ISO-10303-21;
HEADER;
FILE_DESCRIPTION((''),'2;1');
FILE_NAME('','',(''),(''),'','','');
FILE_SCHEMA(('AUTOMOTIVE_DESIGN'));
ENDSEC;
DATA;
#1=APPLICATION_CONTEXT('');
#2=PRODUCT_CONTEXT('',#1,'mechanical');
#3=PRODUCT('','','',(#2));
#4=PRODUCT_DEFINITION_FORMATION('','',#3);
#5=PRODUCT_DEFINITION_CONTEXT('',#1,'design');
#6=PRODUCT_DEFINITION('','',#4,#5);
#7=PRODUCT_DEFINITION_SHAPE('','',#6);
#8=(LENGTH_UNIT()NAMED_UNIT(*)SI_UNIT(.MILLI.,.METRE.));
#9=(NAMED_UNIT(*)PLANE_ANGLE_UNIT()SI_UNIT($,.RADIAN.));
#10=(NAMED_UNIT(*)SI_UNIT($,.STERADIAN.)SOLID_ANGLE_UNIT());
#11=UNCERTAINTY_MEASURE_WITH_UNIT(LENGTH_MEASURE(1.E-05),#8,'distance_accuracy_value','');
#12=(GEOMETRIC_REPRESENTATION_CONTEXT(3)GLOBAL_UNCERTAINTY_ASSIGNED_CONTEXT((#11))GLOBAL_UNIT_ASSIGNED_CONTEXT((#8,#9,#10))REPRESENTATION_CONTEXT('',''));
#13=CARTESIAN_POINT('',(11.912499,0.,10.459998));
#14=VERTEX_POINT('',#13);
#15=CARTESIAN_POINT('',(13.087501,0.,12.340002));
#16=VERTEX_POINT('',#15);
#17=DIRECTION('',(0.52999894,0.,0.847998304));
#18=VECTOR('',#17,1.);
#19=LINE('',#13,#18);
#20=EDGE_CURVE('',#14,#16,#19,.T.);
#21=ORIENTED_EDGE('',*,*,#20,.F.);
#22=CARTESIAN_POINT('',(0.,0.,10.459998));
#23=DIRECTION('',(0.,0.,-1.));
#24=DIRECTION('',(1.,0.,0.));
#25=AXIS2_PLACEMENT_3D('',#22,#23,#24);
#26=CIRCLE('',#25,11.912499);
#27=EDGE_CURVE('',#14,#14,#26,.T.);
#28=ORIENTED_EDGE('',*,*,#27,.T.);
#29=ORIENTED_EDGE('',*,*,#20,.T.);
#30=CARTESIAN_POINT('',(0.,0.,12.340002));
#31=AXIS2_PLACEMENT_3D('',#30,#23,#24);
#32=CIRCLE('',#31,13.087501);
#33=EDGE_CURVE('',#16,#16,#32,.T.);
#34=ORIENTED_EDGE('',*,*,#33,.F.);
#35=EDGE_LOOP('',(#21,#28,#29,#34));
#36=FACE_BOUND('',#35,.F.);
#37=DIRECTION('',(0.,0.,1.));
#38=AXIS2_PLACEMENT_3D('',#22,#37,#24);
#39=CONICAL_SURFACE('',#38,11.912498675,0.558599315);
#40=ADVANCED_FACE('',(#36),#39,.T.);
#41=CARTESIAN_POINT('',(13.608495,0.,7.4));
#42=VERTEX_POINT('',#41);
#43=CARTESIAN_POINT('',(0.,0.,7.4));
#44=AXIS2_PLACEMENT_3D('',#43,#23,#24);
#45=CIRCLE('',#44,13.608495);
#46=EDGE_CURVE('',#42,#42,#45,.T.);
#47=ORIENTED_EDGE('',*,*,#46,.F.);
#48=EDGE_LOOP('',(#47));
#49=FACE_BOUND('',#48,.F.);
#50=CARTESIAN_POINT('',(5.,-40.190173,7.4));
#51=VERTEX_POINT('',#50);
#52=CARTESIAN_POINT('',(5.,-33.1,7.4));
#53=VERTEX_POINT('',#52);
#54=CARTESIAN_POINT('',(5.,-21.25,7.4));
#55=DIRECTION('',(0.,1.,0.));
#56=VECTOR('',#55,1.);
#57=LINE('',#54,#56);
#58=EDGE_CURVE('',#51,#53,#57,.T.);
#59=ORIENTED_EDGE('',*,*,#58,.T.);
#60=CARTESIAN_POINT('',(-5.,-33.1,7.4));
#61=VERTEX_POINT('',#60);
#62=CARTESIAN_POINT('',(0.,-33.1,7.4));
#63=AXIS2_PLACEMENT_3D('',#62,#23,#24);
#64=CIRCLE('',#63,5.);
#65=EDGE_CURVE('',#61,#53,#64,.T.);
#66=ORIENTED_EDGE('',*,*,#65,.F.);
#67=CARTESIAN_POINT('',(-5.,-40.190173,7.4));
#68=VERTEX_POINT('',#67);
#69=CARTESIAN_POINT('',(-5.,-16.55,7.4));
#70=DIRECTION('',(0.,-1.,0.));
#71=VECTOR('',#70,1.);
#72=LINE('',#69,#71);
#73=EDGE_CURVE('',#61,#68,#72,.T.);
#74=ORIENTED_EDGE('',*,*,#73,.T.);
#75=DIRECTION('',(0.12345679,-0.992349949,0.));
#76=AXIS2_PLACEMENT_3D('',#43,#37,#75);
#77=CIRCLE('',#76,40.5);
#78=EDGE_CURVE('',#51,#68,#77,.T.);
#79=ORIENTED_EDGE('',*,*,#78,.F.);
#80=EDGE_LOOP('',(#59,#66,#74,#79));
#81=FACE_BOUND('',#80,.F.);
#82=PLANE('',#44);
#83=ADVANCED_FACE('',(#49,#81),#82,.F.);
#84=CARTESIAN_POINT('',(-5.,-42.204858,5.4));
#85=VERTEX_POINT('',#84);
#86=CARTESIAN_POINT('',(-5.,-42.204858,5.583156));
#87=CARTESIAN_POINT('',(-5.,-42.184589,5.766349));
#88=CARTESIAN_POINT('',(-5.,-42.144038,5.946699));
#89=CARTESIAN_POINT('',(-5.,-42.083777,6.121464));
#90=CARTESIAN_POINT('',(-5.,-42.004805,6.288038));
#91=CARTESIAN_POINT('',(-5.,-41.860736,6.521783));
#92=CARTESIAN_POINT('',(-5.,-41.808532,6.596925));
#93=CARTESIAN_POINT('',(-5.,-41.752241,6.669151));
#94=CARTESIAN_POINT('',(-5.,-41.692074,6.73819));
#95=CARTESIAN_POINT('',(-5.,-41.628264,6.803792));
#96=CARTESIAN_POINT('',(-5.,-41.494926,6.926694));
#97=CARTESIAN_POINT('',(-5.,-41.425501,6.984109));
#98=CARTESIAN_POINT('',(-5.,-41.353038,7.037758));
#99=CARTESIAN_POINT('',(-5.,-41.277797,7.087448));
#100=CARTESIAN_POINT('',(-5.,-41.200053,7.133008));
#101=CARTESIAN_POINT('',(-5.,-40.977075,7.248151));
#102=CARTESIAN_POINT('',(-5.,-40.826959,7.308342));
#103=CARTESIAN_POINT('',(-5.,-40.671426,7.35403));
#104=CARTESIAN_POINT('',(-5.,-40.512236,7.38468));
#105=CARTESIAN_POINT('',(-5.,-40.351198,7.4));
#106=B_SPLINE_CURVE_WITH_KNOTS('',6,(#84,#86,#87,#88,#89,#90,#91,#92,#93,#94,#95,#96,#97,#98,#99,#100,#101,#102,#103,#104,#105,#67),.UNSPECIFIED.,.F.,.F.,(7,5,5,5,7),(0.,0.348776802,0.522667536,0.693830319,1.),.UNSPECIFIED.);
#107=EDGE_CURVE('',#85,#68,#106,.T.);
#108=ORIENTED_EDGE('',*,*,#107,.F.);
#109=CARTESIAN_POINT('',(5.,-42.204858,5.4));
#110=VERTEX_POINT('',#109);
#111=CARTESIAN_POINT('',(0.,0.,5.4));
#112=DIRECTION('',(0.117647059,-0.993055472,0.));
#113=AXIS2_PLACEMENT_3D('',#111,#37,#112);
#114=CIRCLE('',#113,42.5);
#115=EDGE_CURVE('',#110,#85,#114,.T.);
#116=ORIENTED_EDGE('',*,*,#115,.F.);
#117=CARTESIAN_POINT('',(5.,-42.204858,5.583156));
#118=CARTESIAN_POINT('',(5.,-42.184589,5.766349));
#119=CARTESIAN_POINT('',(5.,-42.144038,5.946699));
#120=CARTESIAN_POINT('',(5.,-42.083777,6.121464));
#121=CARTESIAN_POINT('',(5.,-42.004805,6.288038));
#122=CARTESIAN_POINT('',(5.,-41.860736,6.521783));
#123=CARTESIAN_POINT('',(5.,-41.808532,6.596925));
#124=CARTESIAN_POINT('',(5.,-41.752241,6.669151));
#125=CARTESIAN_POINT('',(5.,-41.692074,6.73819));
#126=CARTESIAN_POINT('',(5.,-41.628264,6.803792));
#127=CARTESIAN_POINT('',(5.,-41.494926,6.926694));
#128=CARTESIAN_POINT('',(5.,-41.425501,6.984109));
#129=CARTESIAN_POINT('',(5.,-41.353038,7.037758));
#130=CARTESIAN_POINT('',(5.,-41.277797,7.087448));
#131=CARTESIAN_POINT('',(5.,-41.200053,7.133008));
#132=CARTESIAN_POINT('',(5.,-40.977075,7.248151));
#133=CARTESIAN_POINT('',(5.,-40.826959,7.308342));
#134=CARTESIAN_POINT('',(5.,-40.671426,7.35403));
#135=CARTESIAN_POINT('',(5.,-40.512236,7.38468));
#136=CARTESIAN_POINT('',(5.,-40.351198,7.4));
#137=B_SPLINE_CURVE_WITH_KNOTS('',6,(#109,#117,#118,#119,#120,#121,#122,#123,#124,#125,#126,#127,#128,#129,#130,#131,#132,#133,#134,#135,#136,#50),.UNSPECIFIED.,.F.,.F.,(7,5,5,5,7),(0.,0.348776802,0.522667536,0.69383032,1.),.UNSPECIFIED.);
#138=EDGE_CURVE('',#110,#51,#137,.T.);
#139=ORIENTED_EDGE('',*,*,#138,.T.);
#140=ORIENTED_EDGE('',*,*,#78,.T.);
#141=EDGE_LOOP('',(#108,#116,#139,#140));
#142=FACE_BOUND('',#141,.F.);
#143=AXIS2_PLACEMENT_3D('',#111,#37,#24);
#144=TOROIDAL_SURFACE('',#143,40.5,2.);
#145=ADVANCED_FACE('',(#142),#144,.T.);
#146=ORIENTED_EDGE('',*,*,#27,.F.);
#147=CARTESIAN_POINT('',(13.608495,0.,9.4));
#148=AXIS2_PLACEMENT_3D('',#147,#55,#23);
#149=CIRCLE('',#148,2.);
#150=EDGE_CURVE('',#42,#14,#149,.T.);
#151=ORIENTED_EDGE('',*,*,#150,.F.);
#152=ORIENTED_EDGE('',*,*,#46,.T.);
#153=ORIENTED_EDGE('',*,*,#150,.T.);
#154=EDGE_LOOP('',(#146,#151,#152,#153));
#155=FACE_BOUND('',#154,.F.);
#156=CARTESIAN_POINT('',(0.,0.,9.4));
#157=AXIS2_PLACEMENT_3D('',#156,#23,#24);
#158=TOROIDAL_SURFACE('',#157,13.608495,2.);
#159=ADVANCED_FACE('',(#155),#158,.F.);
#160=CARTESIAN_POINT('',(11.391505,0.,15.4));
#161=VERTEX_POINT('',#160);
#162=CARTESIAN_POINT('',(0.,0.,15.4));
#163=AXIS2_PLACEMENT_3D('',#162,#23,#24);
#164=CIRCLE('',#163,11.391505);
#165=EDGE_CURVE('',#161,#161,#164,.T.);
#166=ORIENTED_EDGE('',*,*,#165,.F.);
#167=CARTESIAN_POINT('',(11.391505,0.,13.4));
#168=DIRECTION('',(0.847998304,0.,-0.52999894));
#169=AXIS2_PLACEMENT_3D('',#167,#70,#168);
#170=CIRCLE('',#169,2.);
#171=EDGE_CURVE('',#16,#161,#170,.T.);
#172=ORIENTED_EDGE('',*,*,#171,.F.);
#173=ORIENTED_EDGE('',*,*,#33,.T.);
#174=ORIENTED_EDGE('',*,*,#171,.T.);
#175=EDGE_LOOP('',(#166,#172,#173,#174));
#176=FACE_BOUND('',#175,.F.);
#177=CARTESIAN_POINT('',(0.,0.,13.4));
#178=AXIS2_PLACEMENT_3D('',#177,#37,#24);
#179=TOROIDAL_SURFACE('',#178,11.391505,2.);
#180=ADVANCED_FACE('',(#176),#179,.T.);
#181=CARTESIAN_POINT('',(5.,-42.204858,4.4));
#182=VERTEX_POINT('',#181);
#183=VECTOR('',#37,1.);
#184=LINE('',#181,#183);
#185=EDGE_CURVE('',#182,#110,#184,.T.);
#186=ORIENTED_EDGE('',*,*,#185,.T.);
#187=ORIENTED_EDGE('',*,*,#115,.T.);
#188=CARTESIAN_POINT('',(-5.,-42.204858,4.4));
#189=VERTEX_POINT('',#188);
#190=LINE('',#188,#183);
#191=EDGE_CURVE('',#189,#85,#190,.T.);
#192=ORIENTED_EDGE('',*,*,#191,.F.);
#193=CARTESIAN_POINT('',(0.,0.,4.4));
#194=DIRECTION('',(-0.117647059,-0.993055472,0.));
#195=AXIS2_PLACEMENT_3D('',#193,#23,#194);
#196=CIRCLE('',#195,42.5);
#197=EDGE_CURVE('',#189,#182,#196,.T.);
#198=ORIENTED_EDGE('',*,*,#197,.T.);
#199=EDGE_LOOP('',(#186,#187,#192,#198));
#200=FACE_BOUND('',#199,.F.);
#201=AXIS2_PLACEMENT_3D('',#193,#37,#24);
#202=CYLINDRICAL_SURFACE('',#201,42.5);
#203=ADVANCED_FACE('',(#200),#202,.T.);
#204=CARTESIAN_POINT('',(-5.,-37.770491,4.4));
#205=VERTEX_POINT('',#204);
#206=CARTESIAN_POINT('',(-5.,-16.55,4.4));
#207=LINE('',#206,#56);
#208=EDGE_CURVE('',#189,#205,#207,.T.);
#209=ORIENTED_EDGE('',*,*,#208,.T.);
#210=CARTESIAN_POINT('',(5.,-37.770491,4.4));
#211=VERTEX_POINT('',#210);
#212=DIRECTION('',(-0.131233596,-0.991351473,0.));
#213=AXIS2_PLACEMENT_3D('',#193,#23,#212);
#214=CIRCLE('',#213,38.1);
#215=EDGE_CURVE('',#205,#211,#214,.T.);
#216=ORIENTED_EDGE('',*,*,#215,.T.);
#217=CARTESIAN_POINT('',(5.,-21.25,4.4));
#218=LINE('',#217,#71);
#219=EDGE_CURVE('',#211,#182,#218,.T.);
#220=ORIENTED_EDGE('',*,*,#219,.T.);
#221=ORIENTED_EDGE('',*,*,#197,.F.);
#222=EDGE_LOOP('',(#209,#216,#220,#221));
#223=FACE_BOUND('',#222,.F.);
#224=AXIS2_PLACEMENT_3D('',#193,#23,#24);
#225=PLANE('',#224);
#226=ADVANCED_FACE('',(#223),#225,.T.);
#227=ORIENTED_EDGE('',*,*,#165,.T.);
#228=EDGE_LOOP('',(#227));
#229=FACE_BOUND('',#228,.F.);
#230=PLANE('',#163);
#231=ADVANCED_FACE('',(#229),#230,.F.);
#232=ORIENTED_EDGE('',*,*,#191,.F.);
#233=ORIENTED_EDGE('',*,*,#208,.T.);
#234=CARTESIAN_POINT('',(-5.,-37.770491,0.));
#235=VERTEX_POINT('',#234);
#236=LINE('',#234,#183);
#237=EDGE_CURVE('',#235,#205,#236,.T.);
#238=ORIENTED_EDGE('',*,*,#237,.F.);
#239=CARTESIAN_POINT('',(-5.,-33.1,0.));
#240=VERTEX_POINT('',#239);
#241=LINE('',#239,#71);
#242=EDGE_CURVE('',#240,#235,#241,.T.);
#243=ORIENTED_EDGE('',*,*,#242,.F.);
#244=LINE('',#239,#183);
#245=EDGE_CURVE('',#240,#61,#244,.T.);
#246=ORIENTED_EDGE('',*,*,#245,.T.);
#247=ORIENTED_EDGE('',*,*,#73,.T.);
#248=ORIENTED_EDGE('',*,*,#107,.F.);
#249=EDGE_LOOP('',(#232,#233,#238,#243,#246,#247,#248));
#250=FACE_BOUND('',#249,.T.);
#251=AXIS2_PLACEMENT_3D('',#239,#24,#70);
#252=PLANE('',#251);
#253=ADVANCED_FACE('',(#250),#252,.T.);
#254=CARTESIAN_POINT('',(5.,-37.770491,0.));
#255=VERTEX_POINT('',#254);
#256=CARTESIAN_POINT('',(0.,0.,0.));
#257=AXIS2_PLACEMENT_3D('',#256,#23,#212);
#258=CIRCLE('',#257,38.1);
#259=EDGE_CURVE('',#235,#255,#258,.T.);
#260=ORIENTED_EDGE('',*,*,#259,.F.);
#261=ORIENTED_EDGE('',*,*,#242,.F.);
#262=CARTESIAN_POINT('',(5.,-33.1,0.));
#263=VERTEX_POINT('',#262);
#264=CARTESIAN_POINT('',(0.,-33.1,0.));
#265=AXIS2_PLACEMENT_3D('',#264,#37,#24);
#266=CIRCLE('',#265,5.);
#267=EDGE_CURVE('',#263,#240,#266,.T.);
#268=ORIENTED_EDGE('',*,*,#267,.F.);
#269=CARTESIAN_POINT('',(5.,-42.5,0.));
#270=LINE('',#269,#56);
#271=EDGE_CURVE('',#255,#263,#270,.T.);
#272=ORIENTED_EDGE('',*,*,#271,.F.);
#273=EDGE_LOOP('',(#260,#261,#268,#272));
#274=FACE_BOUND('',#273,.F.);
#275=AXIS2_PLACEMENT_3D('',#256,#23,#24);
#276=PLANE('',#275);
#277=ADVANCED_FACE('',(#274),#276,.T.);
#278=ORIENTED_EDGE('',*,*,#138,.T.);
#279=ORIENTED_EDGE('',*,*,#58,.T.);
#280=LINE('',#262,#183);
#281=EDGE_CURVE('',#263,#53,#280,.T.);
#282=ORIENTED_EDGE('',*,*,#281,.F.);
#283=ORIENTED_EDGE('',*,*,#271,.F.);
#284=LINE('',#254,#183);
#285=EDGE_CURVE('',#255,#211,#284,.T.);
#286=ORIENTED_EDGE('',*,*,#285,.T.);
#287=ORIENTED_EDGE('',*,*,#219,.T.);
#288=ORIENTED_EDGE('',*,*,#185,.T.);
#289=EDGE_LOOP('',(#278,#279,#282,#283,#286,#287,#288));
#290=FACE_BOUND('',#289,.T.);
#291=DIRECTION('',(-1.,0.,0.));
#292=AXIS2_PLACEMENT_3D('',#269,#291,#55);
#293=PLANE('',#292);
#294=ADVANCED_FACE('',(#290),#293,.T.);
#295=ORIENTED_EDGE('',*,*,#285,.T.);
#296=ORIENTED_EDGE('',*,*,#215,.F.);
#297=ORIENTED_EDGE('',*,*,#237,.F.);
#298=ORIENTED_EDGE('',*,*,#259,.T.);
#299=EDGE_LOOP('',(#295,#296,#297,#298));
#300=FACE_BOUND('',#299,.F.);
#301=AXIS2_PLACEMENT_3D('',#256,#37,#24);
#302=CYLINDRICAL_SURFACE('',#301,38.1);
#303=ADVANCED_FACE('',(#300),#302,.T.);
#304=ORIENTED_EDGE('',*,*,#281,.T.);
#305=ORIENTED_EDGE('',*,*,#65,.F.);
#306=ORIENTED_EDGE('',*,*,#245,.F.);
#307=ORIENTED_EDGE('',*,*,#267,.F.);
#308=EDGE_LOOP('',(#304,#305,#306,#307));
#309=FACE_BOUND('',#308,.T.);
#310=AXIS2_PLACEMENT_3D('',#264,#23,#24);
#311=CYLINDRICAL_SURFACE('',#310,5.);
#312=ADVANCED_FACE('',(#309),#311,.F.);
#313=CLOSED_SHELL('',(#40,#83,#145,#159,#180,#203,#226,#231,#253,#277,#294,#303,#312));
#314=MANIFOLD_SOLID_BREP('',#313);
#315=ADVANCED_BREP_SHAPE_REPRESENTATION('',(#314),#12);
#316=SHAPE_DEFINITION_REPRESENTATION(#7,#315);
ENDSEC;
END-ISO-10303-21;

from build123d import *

# Parameters (mm, degrees)
F3_DEPTH      = 126
F3_DEPTH_BACK = 15.401


# Not quite as in the source:
# - an extrude ends at something that could not be found from the text; its depth is read off the source's solid


with BuildPart() as f1:
    # F0 (on Front) → F1 (revolve)
    with BuildSketch(Plane.XZ):
        with BuildLine():
            Line((0, 0), (38.1, 0))
            Line((38.1, 0), (38.1, 4.4))
            Line((38.1, 4.4), (42.5, 4.4))
            Line((42.5, 4.4), (42.5, 5.4))
            ThreePointArc((42.5, 5.4), (41.9142135624, 6.8142135624), (40.5, 7.4))
            Line((40.5, 7.4), (13.608495283, 7.4))
            ThreePointArc((13.608495283, 7.4), (11.8592103205, 8.4304629352), (11.912498675, 10.45999788))
            Line((11.912498675, 10.45999788), (13.087501325, 12.34000212))
            ThreePointArc((13.087501325, 12.34000212), (13.1407896795, 14.3695370648), (11.391504717, 15.4))
            Line((11.391504717, 15.4), (0, 15.4))
            Line((0, 15.4), (0, 0))
        make_face()
    revolve(axis=Axis((0, 0, 11.4377464585), (0, 0, -1)))

    # F2 (on Top) → F3 (cut, two sides)
    with BuildSketch(Plane.XY) as f3_sk:
        with BuildLine():
            ThreePointArc((5, -33.1), (0, -28.1), (-5, -33.1))
            Line((-5, -33.1), (-5, -42.5))
            Line((-5, -42.5), (5, -42.5))
            Line((5, -42.5), (5, -33.1))
        make_face()
    extrude(amount=-F3_DEPTH, mode=Mode.SUBTRACT)
    extrude(f3_sk.sketch, amount=F3_DEPTH_BACK, mode=Mode.SUBTRACT)


solid = f1.part
